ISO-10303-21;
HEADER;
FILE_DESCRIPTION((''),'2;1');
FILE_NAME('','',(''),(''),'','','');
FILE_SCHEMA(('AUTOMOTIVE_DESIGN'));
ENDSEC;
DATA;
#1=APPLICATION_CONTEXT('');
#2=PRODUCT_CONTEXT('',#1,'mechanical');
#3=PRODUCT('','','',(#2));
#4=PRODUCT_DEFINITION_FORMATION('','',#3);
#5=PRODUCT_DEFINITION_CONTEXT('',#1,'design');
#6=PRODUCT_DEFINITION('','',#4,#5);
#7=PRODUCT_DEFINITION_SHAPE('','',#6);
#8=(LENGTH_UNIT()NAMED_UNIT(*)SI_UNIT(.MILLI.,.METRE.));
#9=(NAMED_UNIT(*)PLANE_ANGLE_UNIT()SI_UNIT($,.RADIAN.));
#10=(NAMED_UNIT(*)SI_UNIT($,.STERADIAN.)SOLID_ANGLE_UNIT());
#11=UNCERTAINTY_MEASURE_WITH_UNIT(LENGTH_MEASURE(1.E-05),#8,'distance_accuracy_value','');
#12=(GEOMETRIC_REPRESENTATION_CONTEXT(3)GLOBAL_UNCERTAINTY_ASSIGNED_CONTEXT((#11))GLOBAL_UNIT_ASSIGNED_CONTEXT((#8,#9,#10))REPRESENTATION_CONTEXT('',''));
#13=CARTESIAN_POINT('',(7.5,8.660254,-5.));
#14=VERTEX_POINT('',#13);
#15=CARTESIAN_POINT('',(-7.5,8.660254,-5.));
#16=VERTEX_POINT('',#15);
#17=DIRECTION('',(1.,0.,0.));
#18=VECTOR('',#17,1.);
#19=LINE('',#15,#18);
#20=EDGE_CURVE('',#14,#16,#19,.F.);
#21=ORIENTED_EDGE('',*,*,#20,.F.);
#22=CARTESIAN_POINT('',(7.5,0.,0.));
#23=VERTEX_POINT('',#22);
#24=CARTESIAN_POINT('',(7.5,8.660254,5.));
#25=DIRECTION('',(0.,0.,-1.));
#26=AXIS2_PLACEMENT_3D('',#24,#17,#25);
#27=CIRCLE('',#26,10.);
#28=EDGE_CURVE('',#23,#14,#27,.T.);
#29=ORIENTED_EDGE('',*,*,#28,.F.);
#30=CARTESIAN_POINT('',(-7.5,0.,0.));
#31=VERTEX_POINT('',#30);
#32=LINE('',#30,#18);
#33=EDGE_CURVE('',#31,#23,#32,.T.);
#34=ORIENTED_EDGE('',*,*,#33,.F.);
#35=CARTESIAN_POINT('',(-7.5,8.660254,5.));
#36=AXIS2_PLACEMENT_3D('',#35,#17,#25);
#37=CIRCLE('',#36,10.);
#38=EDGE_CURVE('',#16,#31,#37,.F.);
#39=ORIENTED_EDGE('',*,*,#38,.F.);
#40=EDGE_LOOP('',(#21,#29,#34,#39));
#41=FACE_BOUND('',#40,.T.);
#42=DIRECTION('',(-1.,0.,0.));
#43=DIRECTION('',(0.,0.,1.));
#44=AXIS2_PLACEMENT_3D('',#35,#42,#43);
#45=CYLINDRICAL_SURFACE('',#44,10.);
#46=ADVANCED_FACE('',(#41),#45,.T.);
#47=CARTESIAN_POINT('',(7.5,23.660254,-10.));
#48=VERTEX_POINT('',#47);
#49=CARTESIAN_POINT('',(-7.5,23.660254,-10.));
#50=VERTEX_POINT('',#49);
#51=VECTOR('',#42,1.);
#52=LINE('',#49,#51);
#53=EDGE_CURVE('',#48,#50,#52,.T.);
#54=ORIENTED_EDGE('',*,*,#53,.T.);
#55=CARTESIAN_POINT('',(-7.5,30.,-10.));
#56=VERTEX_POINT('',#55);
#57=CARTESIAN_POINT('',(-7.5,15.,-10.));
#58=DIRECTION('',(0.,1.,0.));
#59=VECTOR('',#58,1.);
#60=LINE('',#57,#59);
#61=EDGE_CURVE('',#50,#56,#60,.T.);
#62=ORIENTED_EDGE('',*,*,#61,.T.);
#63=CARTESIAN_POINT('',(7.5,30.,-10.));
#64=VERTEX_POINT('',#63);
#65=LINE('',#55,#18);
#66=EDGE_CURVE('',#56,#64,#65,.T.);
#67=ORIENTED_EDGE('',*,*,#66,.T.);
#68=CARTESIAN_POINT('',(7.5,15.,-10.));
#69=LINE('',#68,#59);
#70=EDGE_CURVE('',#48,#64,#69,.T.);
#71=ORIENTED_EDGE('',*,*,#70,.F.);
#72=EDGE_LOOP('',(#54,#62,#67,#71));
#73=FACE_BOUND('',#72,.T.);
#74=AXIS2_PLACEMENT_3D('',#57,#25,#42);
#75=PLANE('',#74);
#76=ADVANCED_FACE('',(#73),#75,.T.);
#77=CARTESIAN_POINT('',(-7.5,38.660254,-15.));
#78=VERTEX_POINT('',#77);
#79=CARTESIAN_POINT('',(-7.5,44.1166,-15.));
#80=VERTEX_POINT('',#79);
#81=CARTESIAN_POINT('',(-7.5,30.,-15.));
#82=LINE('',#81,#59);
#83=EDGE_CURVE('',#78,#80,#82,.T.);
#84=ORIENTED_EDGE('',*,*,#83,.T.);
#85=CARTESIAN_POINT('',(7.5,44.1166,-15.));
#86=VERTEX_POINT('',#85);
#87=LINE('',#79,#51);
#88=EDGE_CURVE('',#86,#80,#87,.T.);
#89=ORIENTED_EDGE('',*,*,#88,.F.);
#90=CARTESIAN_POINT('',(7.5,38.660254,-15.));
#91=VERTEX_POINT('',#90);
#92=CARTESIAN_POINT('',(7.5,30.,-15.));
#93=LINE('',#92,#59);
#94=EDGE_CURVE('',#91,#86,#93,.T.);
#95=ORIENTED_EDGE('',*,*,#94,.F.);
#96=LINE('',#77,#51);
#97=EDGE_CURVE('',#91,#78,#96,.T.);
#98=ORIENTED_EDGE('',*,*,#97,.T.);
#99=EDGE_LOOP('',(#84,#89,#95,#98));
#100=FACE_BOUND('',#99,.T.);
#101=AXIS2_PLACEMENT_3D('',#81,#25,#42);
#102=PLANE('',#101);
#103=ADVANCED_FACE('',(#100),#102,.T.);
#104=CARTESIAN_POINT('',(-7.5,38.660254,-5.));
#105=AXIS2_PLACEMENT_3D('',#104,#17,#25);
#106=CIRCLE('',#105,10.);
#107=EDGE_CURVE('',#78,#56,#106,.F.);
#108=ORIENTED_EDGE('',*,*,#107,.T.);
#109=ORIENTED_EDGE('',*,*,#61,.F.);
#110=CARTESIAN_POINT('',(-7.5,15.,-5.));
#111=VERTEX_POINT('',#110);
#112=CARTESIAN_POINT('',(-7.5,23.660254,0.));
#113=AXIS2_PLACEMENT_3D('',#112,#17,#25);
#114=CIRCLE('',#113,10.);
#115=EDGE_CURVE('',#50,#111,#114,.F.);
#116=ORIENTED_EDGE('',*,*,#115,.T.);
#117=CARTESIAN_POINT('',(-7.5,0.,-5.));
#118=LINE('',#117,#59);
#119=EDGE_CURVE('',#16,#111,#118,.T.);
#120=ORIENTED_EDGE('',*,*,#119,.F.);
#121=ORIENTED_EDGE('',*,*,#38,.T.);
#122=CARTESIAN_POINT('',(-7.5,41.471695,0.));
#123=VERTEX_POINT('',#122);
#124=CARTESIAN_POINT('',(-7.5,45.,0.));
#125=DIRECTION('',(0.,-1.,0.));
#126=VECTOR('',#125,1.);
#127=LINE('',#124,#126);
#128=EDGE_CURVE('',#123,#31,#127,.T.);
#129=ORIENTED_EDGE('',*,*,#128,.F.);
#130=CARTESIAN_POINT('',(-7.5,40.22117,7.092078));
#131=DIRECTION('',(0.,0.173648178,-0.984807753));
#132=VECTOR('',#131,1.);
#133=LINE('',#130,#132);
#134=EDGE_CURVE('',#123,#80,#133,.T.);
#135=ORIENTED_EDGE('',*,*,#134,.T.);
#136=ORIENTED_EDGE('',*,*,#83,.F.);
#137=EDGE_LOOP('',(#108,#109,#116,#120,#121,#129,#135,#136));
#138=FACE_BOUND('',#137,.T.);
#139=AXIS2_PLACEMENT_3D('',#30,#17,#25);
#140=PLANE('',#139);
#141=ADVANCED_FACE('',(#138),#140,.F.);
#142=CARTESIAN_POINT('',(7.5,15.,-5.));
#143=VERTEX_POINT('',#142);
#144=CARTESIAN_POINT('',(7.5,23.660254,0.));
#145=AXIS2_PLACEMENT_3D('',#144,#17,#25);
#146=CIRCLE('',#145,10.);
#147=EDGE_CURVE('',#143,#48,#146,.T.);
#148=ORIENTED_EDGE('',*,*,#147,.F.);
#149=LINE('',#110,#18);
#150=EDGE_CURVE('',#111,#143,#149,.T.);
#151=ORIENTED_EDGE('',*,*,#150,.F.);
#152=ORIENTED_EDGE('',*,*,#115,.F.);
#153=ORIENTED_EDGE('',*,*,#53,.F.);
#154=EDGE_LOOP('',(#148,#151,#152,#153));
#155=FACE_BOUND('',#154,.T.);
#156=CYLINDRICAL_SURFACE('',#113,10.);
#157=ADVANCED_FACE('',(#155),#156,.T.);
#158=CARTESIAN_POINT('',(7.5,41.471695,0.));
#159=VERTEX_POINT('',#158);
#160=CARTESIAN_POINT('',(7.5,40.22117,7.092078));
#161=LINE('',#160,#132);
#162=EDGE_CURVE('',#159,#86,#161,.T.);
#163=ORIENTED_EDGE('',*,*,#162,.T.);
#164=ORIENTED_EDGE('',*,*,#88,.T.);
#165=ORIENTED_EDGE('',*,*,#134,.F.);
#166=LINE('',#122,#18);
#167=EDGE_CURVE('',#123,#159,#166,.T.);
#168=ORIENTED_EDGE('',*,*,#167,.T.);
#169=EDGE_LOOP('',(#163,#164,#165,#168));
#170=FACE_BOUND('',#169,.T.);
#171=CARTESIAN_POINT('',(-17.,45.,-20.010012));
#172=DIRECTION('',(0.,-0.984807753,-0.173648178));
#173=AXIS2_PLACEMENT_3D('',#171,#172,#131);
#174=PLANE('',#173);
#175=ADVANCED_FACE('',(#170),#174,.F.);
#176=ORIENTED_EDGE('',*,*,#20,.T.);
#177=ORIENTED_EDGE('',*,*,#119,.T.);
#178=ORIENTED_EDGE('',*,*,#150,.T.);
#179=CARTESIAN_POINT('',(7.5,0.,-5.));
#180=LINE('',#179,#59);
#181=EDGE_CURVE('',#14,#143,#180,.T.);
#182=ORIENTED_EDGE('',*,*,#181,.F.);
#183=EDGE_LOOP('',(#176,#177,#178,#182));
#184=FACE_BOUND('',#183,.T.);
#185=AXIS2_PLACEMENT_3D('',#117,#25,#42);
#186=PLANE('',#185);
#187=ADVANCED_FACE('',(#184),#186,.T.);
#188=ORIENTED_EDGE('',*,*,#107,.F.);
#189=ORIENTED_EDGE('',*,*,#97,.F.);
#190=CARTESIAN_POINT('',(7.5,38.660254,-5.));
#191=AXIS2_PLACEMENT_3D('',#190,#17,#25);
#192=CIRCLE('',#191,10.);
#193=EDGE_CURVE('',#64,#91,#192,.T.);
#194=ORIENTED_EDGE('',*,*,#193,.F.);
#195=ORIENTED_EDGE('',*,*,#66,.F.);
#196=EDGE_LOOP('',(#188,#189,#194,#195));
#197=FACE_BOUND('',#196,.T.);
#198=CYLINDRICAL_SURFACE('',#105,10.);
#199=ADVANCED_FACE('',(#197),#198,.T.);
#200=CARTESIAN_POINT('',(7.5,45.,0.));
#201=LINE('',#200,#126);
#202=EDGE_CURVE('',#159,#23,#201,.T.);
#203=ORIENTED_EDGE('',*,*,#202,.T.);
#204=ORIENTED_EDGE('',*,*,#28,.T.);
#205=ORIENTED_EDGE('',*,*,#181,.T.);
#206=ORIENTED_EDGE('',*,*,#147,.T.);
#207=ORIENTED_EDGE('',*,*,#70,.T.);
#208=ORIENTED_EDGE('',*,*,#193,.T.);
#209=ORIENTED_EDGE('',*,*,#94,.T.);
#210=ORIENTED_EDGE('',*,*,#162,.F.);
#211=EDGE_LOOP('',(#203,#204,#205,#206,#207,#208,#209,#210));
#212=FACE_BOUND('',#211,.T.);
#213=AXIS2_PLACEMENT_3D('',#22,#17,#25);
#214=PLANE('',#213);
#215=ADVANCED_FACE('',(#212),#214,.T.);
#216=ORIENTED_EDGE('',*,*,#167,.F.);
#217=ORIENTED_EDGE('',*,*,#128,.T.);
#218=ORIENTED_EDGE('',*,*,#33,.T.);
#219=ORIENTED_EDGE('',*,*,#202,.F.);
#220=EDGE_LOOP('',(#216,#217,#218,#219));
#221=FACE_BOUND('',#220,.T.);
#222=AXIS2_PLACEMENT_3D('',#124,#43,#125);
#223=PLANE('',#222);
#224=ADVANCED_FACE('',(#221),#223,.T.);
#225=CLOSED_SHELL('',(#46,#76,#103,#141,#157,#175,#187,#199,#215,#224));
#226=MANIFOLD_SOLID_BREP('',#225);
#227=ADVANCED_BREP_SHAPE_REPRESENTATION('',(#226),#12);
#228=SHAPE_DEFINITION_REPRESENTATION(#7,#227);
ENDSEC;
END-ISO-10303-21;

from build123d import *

# Parameters (mm, degrees)
BOSS_EXTRUDE1_DEPTH      = 7.5
BOSS_EXTRUDE1_DEPTH_BACK = 7.5
FILLET1_R                = 10
FILLET2_R                = 10
CUT_EXTRUDE1_DEPTH       = 24.5


with BuildPart() as part:
    # Sketch1 → Boss-Extrude1 (new, two sides: drawn at the far end of the back side and taken through both)
    with BuildSketch(Plane(origin=(0, 0, 0), x_dir=(0, 0, -1), z_dir=(1, 0, 0)).offset(-BOSS_EXTRUDE1_DEPTH_BACK)):
        Polygon((0, 45), (0, 0), (5, 0), (5, 15), (10, 15), (10, 30), (15, 30), (15, 45), align=None)
    extrude(amount=BOSS_EXTRUDE1_DEPTH + BOSS_EXTRUDE1_DEPTH_BACK)

    # Fillet1
    # the kernel refuses this fillet: 10 mm, written as the material it takes off along each edge
    with BuildSketch(Plane(origin=(29.150635095, 30, -15), x_dir=(0, 1, 0), z_dir=(-1, 0, 0))) as fillet1_piece_1:
        with BuildLine():
            CenterArc((8.660254038, -10), FILLET1_R, 90, 60)
            Line((0, -5), (-0.173205081, -4.9))
            ThreePointArc((-0.173205081, -4.9), (-0.2, -2.5), (-0.2, 0))
            Line((-0.2, 0), (0, 0.2))
            Line((0, 0.2), (8.660254038, 0.2))
            Line((8.660254038, 0.2), (8.660254038, 0))
        make_face()
    extrude(amount=58.301270189, mode=Mode.SUBTRACT)

    # Fillet2
    # the kernel refuses this fillet: 10 mm, written as the material it takes off along each edge
    with BuildSketch(Plane(origin=(-29.150635095, 0, -5), x_dir=(0, 0, 1), z_dir=(1, 0, 0))) as fillet2_piece_1:
        with BuildLine():
            CenterArc((10, -8.660254038), FILLET2_R, 120, 60)
            Line((0, -8.660254038), (-0.2, -8.660254038))
            Line((-0.2, -8.660254038), (-0.2, 0))
            Line((-0.2, 0), (0, 0.2))
            ThreePointArc((0, 0.2), (2.5, 0.2), (4.9, 0.173205081))
            Line((4.9, 0.173205081), (5, 0))
        make_face()
    extrude(amount=58.301270189, mode=Mode.SUBTRACT)
    with BuildSketch(Plane(origin=(-29.150635095, 15, -10), x_dir=(0, 1, 0), z_dir=(1, 0, 0))) as fillet2_piece_2:
        with BuildLine():
            CenterArc((8.660254038, 10), FILLET2_R, 210, 60)
            Line((0, 5), (-0.173205081, 4.9))
            ThreePointArc((-0.173205081, 4.9), (-0.2, 2.5), (-0.2, 0))
            Line((-0.2, 0), (0, -0.2))
            Line((0, -0.2), (8.660254038, -0.2))
            Line((8.660254038, -0.2), (8.660254038, 0))
        make_face()
    extrude(amount=58.301270189, mode=Mode.SUBTRACT)

    # Sketch2 → Cut-Extrude1 (cut)
    with BuildSketch(Plane(origin=(7.5, 0, 0), x_dir=(0, 0, -1), z_dir=(1, 0, 0))):
        Polygon((-3.394371736, 45), (20.0100121, 45), (-5.085276302, 40.575023566), align=None)
    extrude(amount=-CUT_EXTRUDE1_DEPTH, mode=Mode.SUBTRACT)


solid = part.part
